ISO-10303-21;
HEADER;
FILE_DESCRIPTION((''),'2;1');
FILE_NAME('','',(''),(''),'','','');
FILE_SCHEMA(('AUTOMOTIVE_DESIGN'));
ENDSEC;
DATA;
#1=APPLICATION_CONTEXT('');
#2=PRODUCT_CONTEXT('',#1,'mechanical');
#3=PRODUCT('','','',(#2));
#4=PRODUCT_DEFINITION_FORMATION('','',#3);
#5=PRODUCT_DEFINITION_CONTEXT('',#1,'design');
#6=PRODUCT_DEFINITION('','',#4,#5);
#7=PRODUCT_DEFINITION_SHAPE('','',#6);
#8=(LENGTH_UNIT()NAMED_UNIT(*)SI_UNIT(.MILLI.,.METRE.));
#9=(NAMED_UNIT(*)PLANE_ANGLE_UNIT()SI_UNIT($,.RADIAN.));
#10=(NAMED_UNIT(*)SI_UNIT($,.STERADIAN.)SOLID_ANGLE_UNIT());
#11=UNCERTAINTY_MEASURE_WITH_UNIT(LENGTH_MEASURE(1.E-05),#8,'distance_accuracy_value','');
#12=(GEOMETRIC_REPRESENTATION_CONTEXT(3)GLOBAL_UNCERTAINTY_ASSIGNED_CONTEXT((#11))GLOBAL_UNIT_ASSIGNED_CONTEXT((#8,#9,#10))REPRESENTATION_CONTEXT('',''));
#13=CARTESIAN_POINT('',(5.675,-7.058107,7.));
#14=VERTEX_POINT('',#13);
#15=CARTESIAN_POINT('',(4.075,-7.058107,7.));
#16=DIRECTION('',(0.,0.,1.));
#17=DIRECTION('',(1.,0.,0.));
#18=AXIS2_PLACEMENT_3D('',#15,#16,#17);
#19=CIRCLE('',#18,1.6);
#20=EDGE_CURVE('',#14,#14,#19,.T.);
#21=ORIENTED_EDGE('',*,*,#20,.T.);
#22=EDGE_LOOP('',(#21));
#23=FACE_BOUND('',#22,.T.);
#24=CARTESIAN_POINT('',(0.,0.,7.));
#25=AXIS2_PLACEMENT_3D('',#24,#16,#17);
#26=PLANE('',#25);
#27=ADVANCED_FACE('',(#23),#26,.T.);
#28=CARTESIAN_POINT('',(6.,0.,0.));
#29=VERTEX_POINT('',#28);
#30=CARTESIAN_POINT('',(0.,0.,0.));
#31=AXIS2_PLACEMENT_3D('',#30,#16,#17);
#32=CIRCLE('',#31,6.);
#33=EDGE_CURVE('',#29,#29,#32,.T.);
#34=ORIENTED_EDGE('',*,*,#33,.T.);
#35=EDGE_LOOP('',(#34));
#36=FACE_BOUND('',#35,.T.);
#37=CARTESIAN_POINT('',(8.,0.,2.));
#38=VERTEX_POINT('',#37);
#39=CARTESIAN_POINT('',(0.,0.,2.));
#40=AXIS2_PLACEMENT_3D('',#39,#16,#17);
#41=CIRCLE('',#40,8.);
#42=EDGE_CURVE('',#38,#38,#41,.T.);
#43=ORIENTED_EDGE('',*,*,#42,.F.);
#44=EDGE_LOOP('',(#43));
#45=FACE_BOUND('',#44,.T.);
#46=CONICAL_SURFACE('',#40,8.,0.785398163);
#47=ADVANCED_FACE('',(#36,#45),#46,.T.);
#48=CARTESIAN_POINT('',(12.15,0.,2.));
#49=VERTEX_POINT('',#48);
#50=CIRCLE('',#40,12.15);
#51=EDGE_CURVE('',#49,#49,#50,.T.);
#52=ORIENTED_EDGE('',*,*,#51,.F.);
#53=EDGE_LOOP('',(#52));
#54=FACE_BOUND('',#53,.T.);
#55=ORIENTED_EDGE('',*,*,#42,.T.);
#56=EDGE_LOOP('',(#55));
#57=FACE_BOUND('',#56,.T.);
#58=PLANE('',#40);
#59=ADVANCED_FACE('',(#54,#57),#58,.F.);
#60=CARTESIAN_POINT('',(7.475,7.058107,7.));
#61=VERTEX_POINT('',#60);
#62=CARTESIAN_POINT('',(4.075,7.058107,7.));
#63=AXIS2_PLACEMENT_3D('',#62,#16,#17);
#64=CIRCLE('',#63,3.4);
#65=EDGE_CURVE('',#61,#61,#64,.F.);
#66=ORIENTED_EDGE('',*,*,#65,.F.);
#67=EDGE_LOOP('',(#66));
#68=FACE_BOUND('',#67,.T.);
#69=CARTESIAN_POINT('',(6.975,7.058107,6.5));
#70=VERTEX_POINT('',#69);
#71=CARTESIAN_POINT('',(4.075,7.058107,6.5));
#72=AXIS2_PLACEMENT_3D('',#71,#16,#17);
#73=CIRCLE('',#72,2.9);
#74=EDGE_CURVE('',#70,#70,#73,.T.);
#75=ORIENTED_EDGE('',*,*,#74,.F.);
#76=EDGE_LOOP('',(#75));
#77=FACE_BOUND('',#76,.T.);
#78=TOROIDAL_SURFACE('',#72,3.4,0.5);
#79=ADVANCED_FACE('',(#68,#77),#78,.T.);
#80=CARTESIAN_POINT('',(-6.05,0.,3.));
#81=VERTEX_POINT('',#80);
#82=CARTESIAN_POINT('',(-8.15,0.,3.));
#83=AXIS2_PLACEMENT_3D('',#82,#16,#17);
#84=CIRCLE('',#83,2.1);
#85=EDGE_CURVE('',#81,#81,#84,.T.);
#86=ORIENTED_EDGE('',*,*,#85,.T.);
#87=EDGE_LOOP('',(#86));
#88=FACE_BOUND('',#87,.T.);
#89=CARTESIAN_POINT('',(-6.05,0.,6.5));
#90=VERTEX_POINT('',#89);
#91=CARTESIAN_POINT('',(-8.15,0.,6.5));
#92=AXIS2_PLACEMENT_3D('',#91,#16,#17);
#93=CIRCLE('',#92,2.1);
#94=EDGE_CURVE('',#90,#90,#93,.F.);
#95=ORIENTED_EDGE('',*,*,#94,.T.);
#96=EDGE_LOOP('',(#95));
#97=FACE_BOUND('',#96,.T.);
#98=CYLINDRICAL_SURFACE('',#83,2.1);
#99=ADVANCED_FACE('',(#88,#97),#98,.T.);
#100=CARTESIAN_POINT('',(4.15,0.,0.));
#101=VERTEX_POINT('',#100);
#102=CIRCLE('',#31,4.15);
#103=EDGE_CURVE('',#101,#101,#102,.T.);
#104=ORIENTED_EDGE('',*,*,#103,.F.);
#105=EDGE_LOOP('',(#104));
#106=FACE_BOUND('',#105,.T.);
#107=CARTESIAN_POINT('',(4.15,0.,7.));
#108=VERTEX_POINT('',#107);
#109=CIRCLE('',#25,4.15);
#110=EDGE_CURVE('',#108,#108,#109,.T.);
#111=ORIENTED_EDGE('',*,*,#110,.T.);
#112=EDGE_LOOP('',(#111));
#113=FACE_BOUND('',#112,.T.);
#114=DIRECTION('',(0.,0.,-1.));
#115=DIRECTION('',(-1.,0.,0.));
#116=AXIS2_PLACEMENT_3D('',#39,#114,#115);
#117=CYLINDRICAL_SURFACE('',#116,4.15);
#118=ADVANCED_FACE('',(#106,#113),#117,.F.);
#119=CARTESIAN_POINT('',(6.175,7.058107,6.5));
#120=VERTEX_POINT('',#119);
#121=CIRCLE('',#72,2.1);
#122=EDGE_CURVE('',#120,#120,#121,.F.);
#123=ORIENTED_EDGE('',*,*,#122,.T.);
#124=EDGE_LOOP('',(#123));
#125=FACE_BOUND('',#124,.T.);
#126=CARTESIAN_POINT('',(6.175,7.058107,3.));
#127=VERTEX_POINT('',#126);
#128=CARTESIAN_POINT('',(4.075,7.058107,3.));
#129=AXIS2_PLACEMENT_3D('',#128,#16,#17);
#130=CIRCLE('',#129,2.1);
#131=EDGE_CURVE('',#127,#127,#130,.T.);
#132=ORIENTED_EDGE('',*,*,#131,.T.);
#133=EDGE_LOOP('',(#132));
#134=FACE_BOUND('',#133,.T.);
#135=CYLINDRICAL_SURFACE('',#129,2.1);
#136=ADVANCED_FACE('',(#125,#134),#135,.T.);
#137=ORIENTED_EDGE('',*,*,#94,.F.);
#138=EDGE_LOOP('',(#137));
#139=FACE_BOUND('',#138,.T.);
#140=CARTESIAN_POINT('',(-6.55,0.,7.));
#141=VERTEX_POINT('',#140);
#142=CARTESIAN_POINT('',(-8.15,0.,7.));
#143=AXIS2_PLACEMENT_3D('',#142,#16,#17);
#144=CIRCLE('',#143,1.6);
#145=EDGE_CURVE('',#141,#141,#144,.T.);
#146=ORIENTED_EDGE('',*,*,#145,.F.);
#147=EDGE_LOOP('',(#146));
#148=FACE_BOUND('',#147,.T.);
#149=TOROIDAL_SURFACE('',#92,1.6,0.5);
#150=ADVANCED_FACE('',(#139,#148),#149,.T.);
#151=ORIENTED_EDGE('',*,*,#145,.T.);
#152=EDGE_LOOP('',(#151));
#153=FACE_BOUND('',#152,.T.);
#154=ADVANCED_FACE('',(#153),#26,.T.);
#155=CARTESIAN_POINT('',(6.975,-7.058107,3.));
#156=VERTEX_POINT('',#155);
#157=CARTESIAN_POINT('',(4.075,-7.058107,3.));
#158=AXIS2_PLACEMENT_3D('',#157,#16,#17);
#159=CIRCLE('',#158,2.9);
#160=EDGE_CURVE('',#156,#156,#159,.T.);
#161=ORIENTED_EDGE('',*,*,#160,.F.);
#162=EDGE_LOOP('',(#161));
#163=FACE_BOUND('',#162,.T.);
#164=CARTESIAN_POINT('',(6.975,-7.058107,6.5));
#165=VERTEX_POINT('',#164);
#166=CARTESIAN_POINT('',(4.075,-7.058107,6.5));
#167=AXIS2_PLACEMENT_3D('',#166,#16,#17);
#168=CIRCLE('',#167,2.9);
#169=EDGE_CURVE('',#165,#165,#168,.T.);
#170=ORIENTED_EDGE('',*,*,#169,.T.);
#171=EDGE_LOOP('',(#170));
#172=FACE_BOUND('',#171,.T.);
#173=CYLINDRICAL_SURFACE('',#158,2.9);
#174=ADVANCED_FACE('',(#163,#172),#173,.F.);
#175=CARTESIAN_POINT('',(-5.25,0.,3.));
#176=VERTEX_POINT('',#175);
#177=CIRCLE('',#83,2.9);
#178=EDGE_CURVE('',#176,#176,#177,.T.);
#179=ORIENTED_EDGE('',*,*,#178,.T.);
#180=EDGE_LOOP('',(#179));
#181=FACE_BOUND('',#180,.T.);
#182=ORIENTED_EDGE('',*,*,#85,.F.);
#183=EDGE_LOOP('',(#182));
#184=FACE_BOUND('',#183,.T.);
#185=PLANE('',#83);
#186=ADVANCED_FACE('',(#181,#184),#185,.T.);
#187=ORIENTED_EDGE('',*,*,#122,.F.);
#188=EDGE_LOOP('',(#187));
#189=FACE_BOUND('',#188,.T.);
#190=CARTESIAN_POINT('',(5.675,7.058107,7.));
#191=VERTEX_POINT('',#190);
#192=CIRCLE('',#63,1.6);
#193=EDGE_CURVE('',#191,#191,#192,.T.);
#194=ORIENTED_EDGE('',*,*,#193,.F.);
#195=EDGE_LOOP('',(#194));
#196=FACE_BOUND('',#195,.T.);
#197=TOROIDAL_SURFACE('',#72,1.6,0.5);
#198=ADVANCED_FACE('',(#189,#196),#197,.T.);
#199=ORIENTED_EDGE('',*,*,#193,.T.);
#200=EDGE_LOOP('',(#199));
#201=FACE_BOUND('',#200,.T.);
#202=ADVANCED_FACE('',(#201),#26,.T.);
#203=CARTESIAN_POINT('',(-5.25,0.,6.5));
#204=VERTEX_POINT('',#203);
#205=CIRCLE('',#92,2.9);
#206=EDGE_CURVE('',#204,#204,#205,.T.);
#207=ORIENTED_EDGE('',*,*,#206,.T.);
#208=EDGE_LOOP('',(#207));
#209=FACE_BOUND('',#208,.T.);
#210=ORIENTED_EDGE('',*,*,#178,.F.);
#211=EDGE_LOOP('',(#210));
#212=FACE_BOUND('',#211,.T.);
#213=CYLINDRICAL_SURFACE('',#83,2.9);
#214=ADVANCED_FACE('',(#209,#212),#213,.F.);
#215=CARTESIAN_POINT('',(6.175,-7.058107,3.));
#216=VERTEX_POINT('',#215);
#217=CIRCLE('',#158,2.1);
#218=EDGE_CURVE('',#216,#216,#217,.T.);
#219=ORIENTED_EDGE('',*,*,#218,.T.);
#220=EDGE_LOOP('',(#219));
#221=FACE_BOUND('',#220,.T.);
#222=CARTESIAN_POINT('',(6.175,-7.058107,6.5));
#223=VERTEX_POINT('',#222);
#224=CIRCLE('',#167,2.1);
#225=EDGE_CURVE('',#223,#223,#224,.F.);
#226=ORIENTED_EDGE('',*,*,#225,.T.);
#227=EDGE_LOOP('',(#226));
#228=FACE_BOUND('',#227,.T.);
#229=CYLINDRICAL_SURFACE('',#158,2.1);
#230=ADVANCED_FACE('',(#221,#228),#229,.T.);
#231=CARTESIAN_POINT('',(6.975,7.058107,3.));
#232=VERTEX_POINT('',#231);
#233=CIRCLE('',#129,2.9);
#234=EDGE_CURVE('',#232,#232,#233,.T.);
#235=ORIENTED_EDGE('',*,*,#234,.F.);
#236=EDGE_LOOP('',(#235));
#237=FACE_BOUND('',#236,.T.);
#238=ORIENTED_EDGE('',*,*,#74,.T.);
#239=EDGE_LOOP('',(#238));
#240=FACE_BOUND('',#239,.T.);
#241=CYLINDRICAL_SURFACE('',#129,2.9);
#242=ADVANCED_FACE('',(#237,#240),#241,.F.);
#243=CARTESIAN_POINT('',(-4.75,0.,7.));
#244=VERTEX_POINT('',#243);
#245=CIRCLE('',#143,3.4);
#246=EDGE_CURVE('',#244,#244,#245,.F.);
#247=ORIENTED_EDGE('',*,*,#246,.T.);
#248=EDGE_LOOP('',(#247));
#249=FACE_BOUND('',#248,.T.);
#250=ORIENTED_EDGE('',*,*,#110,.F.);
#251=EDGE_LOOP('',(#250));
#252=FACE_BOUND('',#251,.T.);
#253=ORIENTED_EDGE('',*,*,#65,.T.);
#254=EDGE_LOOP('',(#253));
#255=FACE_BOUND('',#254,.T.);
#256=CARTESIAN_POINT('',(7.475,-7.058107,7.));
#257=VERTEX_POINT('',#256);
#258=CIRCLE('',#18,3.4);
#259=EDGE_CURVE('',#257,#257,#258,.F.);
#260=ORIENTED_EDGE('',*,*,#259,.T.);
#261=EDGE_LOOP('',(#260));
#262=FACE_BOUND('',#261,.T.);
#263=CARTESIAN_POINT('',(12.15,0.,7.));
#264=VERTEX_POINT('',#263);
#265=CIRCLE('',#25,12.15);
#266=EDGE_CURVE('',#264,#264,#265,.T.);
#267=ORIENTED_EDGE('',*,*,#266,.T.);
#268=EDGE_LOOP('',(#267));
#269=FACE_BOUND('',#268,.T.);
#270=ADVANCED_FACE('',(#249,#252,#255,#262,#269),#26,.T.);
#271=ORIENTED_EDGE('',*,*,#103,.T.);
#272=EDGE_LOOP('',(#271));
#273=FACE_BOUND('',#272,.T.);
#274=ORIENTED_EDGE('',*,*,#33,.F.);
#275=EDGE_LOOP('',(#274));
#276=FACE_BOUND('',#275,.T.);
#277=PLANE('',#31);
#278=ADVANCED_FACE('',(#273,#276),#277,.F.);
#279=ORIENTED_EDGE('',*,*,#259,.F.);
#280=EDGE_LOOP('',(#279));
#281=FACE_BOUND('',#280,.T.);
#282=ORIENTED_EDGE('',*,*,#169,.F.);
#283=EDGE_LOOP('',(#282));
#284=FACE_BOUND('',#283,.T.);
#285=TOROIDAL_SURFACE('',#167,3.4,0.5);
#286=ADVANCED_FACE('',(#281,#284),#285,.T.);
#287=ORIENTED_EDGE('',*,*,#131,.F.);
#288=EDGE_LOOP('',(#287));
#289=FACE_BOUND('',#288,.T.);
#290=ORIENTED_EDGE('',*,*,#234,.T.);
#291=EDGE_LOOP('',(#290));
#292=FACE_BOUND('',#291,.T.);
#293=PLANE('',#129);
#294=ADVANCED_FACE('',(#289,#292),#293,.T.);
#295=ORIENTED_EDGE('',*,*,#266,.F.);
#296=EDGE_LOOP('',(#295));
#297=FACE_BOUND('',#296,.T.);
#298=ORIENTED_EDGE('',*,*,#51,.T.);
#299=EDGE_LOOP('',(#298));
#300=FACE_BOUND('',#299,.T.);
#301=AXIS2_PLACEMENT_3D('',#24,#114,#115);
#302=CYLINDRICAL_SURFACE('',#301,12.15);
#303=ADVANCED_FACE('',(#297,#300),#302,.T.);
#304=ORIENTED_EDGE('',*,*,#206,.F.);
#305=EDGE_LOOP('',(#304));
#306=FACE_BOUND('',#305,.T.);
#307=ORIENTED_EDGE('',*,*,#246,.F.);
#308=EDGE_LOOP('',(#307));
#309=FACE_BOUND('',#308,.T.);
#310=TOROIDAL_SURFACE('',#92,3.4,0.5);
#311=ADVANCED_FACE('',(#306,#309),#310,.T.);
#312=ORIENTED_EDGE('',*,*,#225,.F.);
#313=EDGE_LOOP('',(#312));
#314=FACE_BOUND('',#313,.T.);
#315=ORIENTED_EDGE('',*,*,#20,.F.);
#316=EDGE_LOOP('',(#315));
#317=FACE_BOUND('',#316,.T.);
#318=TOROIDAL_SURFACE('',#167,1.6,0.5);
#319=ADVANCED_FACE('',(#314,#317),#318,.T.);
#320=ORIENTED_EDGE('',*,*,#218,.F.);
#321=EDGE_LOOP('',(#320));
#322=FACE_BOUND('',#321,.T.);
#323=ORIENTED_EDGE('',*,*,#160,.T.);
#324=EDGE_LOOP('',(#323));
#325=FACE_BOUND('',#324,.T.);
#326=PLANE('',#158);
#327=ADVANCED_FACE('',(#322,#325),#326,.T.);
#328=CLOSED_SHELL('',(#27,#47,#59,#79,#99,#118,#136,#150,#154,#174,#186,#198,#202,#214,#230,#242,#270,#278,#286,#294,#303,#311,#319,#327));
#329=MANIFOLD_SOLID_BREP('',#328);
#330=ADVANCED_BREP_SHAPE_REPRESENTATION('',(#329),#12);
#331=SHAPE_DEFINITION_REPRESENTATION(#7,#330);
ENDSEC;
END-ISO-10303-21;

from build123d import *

# Parameters (mm, degrees)
SKETCH1_R           = 6
SKETCH1_R_2         = 4.15
BOSS_EXTRUDE1_DEPTH = 2
SKETCH2_R           = 12.15
SKETCH2_R_2         = 4.15
BOSS_EXTRUDE2_DEPTH = 5
SKETCH3_R           = 2.9
SKETCH3_R_2         = 2.1
CUT_EXTRUDE1_DEPTH  = 4
FILLET1_R           = 0.5
CHAMFER1_SIZE       = 2


with BuildPart() as part:
    # Sketch1 → Boss-Extrude1 (new body)
    with BuildSketch(Plane.XY):
        Circle(SKETCH1_R)
        Circle(SKETCH1_R_2, mode=Mode.SUBTRACT)
    extrude(amount=BOSS_EXTRUDE1_DEPTH)

    # Sketch2 → Boss-Extrude2 (add)
    with BuildSketch(Plane.XY.offset(2)):
        Circle(SKETCH2_R)
        Circle(SKETCH2_R_2, mode=Mode.SUBTRACT)
    extrude(amount=BOSS_EXTRUDE2_DEPTH)

    # Sketch3 → Cut-Extrude1 (cut)
    # profile 1 of 3: a face of its own
    with BuildSketch(Plane.XY.offset(7)):
        with Locations((-8.15, 0)):
            Circle(SKETCH3_R)
        with Locations((-8.15, 0)):
            Circle(SKETCH3_R_2, mode=Mode.SUBTRACT)
    # profile 2 of 3: a face of its own
    with BuildSketch(Plane.XY.offset(7)):
        with Locations((4.075, 7.058107041)):
            Circle(SKETCH3_R)
        with Locations((4.075, 7.058107041)):
            Circle(SKETCH3_R_2, mode=Mode.SUBTRACT)
    # profile 3 of 3: a face of its own
    with BuildSketch(Plane.XY.offset(7)):
        with Locations((4.075, -7.058107041)):
            Circle(SKETCH3_R)
        with Locations((4.075, -7.058107041)):
            Circle(SKETCH3_R_2, mode=Mode.SUBTRACT)
    extrude(amount=-CUT_EXTRUDE1_DEPTH, mode=Mode.SUBTRACT)

    # Fillet1
    fillet1_edges = [part.edges().sort_by_distance(p)[0] for p in [
        (-11.05, 0, 7),
        (-10.25, 0, 7),
        (1.175, 7.058107041, 7),
        (1.975, 7.058107041, 7),
        (1.175, -7.058107041, 7),
        (1.975, -7.058107041, 7),
    ]]
    fillet(fillet1_edges, radius=FILLET1_R)

    # Chamfer1
    chamfer1_edges = [part.edges().sort_by_distance(p)[0] for p in [
        (-6, 0, 2),
    ]]
    chamfer(chamfer1_edges, length=CHAMFER1_SIZE - 0.0001)  # a hair under: the kernel refuses the full size


solid = part.part
